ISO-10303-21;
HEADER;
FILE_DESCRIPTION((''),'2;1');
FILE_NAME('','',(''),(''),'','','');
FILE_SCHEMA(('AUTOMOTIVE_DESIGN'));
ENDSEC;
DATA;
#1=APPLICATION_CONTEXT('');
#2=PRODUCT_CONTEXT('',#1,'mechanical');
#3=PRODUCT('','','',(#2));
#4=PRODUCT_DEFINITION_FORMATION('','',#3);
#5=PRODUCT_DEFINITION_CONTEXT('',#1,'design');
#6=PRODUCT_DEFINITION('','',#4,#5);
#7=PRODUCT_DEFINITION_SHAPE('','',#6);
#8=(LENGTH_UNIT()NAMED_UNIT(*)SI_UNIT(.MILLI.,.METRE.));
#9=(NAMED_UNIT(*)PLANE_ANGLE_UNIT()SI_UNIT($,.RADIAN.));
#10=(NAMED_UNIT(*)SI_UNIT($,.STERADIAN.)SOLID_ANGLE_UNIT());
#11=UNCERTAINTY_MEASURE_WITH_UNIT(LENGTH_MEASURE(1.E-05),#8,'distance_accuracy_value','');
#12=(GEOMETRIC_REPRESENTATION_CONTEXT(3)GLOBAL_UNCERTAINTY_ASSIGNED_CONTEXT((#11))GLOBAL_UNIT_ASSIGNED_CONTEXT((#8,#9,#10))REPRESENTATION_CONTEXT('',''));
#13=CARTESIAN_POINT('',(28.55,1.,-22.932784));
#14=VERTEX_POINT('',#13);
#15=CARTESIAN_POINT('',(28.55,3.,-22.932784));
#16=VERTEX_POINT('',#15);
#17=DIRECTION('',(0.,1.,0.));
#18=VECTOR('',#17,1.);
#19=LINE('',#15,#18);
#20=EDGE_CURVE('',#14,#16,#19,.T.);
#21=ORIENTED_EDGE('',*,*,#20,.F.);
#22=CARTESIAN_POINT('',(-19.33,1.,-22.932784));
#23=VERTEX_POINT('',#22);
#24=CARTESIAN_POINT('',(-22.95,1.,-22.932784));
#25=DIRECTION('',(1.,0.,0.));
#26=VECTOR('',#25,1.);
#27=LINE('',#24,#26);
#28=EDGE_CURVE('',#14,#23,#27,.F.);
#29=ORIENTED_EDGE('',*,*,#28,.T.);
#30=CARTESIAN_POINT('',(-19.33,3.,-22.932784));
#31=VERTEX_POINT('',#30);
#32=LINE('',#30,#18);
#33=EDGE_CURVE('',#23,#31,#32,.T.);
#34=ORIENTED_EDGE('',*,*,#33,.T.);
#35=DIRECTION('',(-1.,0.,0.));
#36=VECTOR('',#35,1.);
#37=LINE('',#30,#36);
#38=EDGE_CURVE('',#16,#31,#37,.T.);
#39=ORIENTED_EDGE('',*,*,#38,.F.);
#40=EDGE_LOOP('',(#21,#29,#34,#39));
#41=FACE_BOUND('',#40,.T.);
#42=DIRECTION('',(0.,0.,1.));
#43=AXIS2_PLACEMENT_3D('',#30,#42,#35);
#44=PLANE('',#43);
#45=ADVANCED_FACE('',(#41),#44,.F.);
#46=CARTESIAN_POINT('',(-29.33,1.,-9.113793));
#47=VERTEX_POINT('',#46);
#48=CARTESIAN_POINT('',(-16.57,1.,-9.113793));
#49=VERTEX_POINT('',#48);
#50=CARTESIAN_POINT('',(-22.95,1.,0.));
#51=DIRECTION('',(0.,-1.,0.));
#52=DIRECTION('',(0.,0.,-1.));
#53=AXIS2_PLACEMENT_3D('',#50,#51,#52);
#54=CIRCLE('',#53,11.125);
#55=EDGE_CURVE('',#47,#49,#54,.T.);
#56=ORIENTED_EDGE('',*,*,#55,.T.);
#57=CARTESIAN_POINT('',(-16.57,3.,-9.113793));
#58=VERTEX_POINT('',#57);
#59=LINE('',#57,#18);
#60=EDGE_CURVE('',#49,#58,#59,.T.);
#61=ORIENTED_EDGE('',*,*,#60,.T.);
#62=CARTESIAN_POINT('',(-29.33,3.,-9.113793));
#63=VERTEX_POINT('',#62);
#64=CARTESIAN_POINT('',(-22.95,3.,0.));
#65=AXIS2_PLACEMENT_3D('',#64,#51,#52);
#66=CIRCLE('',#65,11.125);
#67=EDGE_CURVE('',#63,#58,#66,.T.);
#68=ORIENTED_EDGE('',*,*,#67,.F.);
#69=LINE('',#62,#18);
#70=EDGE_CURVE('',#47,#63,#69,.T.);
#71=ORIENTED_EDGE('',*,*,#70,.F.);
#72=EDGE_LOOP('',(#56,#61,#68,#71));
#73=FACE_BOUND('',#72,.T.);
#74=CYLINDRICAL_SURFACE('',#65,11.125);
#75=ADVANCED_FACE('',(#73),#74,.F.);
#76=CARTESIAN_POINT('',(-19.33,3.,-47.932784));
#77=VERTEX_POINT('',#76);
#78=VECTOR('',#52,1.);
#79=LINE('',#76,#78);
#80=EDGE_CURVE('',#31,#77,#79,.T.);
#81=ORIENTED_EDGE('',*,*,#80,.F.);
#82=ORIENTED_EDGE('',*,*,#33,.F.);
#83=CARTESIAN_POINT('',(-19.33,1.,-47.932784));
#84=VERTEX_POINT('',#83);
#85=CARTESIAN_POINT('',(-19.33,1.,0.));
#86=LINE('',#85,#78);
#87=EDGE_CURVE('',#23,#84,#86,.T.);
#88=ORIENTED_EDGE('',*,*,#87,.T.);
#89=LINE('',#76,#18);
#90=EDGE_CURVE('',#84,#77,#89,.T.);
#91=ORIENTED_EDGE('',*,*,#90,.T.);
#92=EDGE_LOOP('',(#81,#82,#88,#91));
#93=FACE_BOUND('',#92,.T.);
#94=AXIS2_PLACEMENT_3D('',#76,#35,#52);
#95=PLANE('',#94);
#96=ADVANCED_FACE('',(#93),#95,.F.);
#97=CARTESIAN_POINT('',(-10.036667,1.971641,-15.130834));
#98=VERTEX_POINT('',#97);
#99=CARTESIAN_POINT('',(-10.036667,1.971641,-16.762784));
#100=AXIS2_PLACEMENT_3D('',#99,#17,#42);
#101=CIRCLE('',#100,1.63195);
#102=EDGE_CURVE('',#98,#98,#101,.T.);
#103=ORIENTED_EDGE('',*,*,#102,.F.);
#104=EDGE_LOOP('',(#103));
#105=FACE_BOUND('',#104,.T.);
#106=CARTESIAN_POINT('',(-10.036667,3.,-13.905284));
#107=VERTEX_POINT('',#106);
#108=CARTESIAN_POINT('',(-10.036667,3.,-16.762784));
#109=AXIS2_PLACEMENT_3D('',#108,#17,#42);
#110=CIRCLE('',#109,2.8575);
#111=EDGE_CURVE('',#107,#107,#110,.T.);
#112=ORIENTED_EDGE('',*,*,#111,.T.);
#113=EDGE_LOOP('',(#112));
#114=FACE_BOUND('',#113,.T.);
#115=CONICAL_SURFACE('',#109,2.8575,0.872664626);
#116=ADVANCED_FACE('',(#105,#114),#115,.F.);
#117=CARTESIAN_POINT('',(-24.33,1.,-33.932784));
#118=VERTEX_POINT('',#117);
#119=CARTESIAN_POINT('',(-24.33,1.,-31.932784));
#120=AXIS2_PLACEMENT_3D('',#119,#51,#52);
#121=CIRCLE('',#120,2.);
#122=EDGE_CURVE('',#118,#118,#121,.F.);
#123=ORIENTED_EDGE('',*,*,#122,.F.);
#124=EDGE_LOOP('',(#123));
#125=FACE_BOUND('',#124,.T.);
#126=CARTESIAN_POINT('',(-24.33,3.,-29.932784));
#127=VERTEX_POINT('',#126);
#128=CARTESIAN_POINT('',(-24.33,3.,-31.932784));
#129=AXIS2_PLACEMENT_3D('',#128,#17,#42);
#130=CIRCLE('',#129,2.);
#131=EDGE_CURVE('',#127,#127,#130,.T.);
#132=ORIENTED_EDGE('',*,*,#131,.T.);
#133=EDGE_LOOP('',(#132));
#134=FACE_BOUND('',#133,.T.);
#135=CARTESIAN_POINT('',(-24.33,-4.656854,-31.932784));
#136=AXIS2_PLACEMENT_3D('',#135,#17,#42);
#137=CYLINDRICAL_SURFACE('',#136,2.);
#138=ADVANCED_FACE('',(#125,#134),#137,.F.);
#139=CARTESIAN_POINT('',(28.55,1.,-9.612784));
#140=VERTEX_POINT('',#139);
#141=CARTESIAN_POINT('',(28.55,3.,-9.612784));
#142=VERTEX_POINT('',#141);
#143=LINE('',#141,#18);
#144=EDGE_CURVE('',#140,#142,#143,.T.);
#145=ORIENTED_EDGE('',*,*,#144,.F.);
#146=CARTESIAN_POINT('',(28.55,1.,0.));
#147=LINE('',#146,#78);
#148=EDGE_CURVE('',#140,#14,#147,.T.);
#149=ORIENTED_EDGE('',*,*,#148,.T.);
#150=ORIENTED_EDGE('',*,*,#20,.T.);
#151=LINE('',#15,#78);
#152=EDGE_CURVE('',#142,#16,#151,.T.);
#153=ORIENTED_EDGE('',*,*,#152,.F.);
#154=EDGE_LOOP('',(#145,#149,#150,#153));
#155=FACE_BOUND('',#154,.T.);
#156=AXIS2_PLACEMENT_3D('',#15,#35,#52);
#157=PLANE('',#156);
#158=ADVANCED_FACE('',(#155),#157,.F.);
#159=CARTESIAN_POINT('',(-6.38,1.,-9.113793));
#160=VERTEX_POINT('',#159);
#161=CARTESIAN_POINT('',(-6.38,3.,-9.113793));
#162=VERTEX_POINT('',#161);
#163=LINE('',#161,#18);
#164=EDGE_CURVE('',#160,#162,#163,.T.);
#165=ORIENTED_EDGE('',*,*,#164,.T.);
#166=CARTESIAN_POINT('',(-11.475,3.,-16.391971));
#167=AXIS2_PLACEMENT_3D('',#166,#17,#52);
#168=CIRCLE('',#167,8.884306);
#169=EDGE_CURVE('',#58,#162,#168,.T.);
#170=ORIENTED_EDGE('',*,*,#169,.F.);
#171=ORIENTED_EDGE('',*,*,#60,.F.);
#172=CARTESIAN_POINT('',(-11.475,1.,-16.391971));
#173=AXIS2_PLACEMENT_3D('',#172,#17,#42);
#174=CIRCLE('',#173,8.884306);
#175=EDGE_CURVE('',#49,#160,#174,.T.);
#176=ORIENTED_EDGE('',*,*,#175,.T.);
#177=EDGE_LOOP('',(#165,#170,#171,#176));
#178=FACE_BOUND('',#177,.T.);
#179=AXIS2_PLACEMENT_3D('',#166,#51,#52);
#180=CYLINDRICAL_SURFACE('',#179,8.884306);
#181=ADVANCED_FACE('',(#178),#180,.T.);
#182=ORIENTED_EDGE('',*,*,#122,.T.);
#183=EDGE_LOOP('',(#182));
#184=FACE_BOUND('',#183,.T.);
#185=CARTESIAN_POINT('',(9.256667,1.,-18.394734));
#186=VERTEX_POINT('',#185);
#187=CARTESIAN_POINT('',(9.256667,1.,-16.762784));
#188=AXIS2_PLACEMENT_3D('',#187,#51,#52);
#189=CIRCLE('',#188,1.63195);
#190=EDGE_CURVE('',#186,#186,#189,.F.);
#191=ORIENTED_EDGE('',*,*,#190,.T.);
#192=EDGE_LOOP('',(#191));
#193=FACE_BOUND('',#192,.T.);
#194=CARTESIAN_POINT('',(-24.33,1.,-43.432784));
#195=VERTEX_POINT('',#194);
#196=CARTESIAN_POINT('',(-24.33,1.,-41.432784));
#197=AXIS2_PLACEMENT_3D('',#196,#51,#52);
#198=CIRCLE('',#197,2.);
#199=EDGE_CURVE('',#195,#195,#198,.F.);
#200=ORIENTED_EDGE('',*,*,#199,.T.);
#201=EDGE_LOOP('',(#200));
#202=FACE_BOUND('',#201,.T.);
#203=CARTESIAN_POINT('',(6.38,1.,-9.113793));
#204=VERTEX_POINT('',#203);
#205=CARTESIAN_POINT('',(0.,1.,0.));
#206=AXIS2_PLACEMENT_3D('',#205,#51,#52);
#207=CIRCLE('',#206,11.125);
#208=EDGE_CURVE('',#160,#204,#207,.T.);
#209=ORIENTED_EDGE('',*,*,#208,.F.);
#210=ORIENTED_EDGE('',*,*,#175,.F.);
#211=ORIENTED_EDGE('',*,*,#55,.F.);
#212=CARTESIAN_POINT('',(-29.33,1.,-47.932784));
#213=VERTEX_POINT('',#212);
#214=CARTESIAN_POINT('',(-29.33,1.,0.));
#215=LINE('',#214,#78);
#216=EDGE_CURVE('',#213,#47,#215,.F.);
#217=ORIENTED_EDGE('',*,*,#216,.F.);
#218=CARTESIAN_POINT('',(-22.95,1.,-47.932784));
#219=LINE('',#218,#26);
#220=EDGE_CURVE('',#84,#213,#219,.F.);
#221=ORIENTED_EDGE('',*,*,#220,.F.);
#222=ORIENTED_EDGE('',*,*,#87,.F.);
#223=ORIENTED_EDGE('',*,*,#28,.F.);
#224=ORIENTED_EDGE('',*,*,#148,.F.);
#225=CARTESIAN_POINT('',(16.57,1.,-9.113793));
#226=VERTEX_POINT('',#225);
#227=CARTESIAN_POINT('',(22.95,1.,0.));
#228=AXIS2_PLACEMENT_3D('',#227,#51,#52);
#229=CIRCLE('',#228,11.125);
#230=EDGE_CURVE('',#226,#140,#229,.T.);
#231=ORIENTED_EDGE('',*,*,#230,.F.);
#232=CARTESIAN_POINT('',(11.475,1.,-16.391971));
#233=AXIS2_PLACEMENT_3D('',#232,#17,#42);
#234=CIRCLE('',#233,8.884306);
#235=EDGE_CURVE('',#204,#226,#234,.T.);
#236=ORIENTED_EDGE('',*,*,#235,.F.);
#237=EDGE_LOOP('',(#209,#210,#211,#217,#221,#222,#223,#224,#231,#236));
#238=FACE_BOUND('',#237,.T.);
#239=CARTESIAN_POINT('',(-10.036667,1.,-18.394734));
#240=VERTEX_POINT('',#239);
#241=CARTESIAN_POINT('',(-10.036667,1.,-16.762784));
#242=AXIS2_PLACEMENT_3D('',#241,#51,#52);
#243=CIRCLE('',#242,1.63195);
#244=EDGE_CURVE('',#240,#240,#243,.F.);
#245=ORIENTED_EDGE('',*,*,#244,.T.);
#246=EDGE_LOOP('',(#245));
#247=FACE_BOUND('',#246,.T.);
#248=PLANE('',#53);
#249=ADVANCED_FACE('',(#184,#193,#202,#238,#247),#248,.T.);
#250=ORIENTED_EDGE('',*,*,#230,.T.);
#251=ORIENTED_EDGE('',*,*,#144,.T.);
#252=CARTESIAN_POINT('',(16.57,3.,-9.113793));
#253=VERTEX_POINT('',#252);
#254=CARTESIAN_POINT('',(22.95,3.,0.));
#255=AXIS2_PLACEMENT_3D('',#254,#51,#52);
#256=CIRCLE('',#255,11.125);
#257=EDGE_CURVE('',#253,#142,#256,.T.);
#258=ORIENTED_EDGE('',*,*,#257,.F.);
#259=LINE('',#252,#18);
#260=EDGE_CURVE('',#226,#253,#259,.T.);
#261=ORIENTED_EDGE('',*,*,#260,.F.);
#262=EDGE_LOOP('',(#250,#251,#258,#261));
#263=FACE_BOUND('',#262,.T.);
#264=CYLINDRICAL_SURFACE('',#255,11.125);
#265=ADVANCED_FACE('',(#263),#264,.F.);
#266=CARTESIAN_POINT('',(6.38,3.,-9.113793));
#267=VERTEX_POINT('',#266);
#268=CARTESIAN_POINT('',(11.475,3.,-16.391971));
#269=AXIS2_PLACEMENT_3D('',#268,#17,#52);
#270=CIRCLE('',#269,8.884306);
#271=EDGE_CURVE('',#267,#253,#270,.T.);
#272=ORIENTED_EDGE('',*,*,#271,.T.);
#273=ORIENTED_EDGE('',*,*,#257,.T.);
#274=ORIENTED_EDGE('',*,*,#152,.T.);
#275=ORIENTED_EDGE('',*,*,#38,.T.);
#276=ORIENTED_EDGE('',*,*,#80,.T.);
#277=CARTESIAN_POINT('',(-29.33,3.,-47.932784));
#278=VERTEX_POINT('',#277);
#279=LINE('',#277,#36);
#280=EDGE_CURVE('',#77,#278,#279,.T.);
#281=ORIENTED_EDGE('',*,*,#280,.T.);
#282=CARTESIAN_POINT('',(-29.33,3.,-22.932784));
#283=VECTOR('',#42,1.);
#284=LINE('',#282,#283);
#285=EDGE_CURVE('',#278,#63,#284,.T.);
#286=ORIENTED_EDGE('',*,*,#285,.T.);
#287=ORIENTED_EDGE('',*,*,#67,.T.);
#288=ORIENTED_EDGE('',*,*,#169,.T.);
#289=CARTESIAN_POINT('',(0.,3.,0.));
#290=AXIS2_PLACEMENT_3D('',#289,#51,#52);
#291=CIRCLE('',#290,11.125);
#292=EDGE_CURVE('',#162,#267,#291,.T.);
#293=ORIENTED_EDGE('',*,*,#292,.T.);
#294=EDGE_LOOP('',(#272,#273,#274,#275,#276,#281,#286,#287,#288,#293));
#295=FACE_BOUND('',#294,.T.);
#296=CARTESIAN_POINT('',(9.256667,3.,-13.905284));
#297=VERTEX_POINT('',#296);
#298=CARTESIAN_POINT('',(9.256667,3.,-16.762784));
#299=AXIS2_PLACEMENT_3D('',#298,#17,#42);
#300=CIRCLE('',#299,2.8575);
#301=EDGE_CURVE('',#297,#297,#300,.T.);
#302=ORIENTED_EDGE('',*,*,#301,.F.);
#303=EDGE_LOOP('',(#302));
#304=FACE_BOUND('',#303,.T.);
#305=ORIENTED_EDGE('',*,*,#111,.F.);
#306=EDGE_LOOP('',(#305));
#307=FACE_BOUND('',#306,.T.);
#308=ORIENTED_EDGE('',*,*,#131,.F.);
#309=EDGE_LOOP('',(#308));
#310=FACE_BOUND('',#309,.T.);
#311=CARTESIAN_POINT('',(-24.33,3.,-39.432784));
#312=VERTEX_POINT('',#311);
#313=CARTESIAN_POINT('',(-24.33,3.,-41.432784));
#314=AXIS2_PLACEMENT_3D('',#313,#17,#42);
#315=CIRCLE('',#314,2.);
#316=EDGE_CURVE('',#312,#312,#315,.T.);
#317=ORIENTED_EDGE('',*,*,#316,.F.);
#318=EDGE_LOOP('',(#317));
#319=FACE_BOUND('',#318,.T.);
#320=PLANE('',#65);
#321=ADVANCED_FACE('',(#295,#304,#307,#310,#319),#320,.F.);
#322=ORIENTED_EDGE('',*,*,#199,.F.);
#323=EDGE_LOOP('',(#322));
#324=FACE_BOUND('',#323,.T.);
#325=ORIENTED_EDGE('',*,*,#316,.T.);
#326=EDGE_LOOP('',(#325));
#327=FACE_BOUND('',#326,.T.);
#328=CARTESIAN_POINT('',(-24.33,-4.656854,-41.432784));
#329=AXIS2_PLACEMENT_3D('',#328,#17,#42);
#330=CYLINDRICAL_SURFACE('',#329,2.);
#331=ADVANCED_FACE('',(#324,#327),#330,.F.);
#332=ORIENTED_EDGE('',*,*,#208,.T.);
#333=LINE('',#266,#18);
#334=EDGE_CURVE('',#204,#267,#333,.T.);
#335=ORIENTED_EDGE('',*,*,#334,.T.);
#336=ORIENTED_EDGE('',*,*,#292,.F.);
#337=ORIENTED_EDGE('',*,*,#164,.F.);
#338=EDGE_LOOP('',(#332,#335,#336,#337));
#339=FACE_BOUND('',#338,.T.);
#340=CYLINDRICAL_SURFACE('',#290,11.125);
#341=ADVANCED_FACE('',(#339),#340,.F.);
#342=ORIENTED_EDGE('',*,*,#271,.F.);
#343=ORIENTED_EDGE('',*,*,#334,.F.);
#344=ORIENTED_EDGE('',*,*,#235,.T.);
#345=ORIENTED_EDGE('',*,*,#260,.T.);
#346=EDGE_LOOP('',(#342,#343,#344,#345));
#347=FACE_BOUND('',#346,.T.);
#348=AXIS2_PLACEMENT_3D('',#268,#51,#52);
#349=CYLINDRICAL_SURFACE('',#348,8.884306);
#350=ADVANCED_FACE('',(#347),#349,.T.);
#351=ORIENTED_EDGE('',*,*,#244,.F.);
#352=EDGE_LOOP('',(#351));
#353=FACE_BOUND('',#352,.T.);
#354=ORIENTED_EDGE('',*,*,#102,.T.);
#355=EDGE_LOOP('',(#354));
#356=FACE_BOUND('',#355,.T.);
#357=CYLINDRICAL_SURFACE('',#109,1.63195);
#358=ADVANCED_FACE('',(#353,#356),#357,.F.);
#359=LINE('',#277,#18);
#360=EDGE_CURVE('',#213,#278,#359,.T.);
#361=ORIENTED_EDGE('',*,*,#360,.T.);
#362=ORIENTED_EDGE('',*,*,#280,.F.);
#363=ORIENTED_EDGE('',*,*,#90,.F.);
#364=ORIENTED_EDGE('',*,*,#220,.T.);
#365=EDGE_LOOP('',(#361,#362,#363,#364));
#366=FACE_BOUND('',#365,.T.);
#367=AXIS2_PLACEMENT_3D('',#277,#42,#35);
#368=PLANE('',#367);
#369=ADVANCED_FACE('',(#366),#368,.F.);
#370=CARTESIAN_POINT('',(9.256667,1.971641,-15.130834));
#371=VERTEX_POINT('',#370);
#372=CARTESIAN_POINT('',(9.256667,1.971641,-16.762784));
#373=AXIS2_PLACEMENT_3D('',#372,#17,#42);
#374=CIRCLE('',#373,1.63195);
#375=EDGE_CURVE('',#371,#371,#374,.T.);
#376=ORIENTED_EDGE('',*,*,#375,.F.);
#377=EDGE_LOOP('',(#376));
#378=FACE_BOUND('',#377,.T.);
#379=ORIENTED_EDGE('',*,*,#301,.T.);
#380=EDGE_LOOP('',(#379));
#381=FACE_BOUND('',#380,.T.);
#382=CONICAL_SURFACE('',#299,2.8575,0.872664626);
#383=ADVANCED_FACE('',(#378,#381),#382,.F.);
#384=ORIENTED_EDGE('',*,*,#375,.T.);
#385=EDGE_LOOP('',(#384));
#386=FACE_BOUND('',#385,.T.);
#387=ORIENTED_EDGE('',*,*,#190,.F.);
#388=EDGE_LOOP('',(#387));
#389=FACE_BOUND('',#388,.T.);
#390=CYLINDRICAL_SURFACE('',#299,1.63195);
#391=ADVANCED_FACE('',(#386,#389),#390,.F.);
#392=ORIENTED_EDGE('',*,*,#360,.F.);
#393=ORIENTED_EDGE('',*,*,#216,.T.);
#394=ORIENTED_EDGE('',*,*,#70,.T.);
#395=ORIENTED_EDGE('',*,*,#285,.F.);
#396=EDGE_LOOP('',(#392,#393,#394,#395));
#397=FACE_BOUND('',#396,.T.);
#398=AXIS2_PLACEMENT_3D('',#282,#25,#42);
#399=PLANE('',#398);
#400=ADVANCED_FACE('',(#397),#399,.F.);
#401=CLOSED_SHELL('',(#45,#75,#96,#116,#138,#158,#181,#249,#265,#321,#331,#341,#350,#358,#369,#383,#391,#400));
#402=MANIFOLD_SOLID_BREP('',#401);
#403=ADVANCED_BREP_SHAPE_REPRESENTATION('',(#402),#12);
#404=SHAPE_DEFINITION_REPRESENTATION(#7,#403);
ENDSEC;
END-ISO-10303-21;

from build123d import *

# Parameters (mm, degrees)
BOSS_EXTRUDE1_DEPTH                               = 3
CONVERT_SOLID1_DEPTH                              = 1
SKETCH8_R                                         = 2
CUT_EXTRUDE1_DEPTH                                = 2
CSK_FOR_4_FLAT_HEAD_MACHINE_SCREW_100_D           = 3.2639
CSK_FOR_4_FLAT_HEAD_MACHINE_SCREW_100_DEPTH       = 2
CSK_FOR_4_FLAT_HEAD_MACHINE_SCREW_100_CSINK_D     = 5.715
CSK_FOR_4_FLAT_HEAD_MACHINE_SCREW_100_CSINK_ANGLE = 100
CSK_FOR_4_FLAT_HEAD_MACHINE_SCREW_100_TIP         = 0.980574487


# Read off the part's stored shape, not the designer's step: Convert-Solid1
with BuildPart() as part:
    # Sketch2 → Boss-Extrude1 (new body)
    with BuildSketch(Plane(origin=(0, 0, 0), x_dir=(1, 0, 0), z_dir=(0, 1, 0))):
        with BuildLine():
            Line((-29.33, 9.113793118), (-29.33, 22.932784456))
            Line((-29.33, 22.932784456), (-29.33, 47.932784456))
            Line((-29.33, 47.932784456), (-19.33, 47.932784456))
            Line((-19.33, 47.932784456), (-19.33, 22.932784456))
            Line((-19.33, 22.932784456), (28.55, 22.932784456))
            Line((28.55, 22.932784456), (28.55, 9.612784456))
            ThreePointArc((28.55, 9.612784456), (22.487022583, 11.115362203), (16.57, 9.113793118))
            ThreePointArc((16.57, 9.113793118), (11.475, 7.507664738), (6.38, 9.113793118))
            ThreePointArc((6.38, 9.113793118), (0, 11.125), (-6.38, 9.113793118))
            ThreePointArc((-6.38, 9.113793118), (-11.475, 7.507664738), (-16.57, 9.113793118))
            ThreePointArc((-16.57, 9.113793118), (-22.95, 11.125), (-29.33, 9.113793118))
        make_face()
    extrude(amount=BOSS_EXTRUDE1_DEPTH)

    # Convert-Solid1 outline → Convert-Solid1 (cut)
    with BuildSketch(Plane(origin=(0, 0, 0), x_dir=(1, 0, 0), z_dir=(0, 1, 0))):
        with BuildLine():
            Line((-29.33, 47.932784456), (-29.33, 9.113793118))
            ThreePointArc((-29.33, 9.113793118), (-22.95, 11.125), (-16.57, 9.113793118))
            ThreePointArc((-16.57, 9.113793118), (-11.475, 7.507664738), (-6.38, 9.113793118))
            ThreePointArc((-6.38, 9.113793118), (0, 11.125), (6.38, 9.113793118))
            ThreePointArc((6.38, 9.113793118), (11.475, 7.507664738), (16.57, 9.113793118))
            ThreePointArc((16.57, 9.113793118), (22.487022583, 11.115362203), (28.55, 9.612784456))
            Line((28.55, 9.612784456), (28.55, 22.932784456))
            Line((28.55, 22.932784456), (-19.33, 22.932784456))
            Line((-19.33, 22.932784456), (-19.33, 47.932784456))
            Line((-19.33, 47.932784456), (-29.33, 47.932784456))
        make_face()
    extrude(amount=CONVERT_SOLID1_DEPTH, mode=Mode.SUBTRACT)

    # Sketch8 → Cut-Extrude1 (cut)
    with BuildSketch(Plane(origin=(0, 3, 0), x_dir=(1, 0, 0), z_dir=(0, 1, 0))):
        with Locations(Location((-24.33, 41.432784456, 0), (0, 0, 270))):
            Circle(SKETCH8_R)
        with Locations(Location((-24.33, 31.932784456, 0), (0, 0, 270))):
            Circle(SKETCH8_R)
    extrude(amount=-CUT_EXTRUDE1_DEPTH, mode=Mode.SUBTRACT)

    # CSK for #4 Flat Head Machine Screw (100)1
    with Locations(Plane(origin=(0, 3, 0), x_dir=(1, 0, 0), z_dir=(0, 1, 0))):
        with Locations((9.256666667, 16.762784456), (-10.036666667, 16.762784456)):
            CounterSinkHole(CSK_FOR_4_FLAT_HEAD_MACHINE_SCREW_100_D / 2, CSK_FOR_4_FLAT_HEAD_MACHINE_SCREW_100_CSINK_D / 2, depth=CSK_FOR_4_FLAT_HEAD_MACHINE_SCREW_100_DEPTH, counter_sink_angle=CSK_FOR_4_FLAT_HEAD_MACHINE_SCREW_100_CSINK_ANGLE)
            with Locations((0, 0, -(CSK_FOR_4_FLAT_HEAD_MACHINE_SCREW_100_DEPTH + CSK_FOR_4_FLAT_HEAD_MACHINE_SCREW_100_TIP / 2))):  # 118° drill point
                Cone(0, CSK_FOR_4_FLAT_HEAD_MACHINE_SCREW_100_D / 2, CSK_FOR_4_FLAT_HEAD_MACHINE_SCREW_100_TIP, mode=Mode.SUBTRACT)


solid = part.part
